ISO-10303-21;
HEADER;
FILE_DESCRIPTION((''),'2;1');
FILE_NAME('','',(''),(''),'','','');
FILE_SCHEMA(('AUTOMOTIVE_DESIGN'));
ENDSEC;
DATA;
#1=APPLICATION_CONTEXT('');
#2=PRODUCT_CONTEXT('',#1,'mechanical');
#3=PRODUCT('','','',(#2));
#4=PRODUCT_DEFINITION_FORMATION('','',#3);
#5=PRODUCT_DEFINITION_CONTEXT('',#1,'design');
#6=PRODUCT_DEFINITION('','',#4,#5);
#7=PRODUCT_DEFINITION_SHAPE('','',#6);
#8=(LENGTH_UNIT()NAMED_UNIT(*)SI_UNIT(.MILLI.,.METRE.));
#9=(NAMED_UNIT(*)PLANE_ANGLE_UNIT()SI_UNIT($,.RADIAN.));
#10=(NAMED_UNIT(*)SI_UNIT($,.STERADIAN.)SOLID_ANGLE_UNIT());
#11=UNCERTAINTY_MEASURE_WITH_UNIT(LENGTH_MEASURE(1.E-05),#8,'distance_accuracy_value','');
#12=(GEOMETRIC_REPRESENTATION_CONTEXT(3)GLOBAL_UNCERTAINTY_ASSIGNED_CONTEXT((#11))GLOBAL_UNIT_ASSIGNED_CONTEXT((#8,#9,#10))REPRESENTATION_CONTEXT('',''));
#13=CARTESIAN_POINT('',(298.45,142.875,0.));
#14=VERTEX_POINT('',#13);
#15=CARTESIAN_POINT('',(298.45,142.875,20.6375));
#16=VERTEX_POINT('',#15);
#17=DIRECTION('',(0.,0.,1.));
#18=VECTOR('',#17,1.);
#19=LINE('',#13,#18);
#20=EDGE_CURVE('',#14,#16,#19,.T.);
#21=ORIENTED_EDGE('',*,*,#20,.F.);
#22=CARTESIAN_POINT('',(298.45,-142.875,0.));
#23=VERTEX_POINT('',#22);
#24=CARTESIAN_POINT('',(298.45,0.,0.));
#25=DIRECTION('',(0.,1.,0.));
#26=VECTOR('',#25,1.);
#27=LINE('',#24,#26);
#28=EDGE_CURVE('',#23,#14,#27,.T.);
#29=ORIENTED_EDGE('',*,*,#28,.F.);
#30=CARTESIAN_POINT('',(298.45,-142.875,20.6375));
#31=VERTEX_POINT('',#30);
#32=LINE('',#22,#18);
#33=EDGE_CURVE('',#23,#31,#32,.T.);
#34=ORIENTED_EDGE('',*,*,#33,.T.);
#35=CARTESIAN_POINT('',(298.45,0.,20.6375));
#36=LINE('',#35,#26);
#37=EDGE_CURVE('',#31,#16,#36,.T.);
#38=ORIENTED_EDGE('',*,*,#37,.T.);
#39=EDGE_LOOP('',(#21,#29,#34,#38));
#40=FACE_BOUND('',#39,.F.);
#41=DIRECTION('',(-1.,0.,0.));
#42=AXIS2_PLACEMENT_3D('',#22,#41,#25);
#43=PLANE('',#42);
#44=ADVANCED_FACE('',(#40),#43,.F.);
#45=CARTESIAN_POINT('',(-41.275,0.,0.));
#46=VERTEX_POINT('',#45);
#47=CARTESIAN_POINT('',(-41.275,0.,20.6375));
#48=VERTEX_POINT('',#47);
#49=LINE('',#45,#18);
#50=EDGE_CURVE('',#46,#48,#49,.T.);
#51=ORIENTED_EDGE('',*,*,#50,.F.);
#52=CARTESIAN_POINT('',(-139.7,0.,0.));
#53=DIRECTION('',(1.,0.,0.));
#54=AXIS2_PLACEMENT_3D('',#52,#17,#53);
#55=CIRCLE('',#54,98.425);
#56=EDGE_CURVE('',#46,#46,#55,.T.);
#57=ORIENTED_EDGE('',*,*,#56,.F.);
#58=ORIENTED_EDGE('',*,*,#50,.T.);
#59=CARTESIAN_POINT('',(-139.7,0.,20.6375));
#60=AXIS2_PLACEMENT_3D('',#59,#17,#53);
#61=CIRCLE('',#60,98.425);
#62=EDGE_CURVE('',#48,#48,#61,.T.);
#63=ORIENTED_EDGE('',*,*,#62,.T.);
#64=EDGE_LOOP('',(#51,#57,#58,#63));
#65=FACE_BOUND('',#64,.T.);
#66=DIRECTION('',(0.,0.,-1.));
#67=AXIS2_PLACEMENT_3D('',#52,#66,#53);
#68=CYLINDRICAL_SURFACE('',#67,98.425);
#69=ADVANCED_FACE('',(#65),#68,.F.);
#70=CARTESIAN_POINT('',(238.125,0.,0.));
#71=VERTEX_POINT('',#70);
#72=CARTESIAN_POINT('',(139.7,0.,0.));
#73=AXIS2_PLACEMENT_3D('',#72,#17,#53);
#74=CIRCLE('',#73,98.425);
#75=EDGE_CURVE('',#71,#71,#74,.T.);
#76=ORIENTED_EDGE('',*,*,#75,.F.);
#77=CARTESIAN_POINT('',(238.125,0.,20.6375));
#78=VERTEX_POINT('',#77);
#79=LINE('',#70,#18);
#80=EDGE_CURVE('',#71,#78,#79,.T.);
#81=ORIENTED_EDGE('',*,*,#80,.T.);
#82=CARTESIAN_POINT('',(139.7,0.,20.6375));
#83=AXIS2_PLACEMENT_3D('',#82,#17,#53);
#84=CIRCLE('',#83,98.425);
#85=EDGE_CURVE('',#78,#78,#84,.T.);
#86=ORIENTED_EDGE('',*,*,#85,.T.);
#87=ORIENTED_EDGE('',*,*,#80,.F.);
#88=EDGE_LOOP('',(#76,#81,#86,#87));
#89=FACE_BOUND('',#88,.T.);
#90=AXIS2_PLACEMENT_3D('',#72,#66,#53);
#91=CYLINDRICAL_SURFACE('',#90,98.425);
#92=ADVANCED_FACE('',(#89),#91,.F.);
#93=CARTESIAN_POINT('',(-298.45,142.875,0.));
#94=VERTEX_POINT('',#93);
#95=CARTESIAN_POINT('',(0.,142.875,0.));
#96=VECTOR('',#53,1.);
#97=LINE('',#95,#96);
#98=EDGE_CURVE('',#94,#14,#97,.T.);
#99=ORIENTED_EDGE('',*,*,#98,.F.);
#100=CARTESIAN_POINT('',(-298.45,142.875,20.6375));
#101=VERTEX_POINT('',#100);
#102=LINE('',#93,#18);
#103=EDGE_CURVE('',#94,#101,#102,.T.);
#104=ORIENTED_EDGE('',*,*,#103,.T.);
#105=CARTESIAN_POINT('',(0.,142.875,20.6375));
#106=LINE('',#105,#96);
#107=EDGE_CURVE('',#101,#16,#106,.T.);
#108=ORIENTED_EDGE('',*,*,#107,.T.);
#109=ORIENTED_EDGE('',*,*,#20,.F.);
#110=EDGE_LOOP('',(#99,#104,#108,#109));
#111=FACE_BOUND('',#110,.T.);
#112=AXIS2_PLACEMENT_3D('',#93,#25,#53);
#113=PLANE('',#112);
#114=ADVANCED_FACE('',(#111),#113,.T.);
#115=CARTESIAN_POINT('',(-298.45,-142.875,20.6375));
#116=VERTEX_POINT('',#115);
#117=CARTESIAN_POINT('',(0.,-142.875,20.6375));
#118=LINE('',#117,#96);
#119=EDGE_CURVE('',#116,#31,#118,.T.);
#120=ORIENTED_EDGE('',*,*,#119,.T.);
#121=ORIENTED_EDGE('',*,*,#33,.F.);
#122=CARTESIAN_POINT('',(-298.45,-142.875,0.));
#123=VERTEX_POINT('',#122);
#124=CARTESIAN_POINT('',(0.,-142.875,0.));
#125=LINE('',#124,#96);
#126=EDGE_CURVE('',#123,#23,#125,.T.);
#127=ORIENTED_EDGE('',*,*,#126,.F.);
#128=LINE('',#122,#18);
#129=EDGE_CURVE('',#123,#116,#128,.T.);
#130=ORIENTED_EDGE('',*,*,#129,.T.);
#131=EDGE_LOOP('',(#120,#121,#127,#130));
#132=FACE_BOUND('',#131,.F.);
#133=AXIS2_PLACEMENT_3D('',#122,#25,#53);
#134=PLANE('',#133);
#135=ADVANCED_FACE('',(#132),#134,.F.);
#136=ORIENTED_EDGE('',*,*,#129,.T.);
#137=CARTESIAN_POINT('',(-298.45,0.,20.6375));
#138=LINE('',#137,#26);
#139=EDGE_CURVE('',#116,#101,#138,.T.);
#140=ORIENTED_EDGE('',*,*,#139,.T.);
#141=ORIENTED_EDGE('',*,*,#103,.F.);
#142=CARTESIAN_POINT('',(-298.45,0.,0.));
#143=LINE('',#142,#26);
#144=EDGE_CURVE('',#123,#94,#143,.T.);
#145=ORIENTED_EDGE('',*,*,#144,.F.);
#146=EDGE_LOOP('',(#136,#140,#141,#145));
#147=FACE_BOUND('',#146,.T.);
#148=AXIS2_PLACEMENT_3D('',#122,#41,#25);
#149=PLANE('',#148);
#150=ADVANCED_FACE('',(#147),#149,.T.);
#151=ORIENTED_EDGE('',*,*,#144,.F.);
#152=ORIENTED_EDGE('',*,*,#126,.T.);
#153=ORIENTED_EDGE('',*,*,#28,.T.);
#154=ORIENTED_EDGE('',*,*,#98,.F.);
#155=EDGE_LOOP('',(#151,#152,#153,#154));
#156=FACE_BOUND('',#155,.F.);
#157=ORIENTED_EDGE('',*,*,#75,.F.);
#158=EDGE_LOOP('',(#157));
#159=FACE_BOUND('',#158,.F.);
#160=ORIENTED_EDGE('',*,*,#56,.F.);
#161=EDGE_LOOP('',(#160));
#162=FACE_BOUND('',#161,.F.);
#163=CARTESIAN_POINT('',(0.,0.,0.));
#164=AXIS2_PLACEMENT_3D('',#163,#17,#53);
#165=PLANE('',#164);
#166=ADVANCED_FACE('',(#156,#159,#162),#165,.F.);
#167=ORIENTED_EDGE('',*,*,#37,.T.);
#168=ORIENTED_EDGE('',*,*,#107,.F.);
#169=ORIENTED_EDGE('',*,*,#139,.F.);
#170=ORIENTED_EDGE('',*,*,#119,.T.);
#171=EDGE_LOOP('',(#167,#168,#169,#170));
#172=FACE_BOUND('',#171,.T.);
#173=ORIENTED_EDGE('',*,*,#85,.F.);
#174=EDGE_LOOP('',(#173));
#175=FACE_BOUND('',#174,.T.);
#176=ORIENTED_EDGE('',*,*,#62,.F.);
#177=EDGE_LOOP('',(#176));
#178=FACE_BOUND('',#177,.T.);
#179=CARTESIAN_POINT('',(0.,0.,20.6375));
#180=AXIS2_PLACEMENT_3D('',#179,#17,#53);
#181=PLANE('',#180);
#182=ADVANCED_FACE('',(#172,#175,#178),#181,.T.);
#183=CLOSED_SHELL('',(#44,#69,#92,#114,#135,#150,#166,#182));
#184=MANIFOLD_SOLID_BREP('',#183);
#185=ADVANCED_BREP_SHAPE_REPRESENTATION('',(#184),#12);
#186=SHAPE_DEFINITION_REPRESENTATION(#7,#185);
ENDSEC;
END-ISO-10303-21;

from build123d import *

# Parameters (mm, degrees)
F0_W     = 596.9
F0_H     = 285.75
F0_R     = 98.425
F1_DEPTH = 20.6375


# Not quite as in the source:
# - a length typed as a fraction of an inch, garbled in the dataset ("3 / 203.2 mm" for 3/8 in), is restored


with BuildPart() as f1:
    # F0 (on Top) → F1 (new body)
    with BuildSketch(Plane.XY):
        Rectangle(F0_W, F0_H)
        with Locations((-139.7, 0)):
            Circle(F0_R, mode=Mode.SUBTRACT)
        with Locations((139.7, 0)):
            Circle(F0_R, mode=Mode.SUBTRACT)
    extrude(amount=F1_DEPTH)


solid = f1.part
